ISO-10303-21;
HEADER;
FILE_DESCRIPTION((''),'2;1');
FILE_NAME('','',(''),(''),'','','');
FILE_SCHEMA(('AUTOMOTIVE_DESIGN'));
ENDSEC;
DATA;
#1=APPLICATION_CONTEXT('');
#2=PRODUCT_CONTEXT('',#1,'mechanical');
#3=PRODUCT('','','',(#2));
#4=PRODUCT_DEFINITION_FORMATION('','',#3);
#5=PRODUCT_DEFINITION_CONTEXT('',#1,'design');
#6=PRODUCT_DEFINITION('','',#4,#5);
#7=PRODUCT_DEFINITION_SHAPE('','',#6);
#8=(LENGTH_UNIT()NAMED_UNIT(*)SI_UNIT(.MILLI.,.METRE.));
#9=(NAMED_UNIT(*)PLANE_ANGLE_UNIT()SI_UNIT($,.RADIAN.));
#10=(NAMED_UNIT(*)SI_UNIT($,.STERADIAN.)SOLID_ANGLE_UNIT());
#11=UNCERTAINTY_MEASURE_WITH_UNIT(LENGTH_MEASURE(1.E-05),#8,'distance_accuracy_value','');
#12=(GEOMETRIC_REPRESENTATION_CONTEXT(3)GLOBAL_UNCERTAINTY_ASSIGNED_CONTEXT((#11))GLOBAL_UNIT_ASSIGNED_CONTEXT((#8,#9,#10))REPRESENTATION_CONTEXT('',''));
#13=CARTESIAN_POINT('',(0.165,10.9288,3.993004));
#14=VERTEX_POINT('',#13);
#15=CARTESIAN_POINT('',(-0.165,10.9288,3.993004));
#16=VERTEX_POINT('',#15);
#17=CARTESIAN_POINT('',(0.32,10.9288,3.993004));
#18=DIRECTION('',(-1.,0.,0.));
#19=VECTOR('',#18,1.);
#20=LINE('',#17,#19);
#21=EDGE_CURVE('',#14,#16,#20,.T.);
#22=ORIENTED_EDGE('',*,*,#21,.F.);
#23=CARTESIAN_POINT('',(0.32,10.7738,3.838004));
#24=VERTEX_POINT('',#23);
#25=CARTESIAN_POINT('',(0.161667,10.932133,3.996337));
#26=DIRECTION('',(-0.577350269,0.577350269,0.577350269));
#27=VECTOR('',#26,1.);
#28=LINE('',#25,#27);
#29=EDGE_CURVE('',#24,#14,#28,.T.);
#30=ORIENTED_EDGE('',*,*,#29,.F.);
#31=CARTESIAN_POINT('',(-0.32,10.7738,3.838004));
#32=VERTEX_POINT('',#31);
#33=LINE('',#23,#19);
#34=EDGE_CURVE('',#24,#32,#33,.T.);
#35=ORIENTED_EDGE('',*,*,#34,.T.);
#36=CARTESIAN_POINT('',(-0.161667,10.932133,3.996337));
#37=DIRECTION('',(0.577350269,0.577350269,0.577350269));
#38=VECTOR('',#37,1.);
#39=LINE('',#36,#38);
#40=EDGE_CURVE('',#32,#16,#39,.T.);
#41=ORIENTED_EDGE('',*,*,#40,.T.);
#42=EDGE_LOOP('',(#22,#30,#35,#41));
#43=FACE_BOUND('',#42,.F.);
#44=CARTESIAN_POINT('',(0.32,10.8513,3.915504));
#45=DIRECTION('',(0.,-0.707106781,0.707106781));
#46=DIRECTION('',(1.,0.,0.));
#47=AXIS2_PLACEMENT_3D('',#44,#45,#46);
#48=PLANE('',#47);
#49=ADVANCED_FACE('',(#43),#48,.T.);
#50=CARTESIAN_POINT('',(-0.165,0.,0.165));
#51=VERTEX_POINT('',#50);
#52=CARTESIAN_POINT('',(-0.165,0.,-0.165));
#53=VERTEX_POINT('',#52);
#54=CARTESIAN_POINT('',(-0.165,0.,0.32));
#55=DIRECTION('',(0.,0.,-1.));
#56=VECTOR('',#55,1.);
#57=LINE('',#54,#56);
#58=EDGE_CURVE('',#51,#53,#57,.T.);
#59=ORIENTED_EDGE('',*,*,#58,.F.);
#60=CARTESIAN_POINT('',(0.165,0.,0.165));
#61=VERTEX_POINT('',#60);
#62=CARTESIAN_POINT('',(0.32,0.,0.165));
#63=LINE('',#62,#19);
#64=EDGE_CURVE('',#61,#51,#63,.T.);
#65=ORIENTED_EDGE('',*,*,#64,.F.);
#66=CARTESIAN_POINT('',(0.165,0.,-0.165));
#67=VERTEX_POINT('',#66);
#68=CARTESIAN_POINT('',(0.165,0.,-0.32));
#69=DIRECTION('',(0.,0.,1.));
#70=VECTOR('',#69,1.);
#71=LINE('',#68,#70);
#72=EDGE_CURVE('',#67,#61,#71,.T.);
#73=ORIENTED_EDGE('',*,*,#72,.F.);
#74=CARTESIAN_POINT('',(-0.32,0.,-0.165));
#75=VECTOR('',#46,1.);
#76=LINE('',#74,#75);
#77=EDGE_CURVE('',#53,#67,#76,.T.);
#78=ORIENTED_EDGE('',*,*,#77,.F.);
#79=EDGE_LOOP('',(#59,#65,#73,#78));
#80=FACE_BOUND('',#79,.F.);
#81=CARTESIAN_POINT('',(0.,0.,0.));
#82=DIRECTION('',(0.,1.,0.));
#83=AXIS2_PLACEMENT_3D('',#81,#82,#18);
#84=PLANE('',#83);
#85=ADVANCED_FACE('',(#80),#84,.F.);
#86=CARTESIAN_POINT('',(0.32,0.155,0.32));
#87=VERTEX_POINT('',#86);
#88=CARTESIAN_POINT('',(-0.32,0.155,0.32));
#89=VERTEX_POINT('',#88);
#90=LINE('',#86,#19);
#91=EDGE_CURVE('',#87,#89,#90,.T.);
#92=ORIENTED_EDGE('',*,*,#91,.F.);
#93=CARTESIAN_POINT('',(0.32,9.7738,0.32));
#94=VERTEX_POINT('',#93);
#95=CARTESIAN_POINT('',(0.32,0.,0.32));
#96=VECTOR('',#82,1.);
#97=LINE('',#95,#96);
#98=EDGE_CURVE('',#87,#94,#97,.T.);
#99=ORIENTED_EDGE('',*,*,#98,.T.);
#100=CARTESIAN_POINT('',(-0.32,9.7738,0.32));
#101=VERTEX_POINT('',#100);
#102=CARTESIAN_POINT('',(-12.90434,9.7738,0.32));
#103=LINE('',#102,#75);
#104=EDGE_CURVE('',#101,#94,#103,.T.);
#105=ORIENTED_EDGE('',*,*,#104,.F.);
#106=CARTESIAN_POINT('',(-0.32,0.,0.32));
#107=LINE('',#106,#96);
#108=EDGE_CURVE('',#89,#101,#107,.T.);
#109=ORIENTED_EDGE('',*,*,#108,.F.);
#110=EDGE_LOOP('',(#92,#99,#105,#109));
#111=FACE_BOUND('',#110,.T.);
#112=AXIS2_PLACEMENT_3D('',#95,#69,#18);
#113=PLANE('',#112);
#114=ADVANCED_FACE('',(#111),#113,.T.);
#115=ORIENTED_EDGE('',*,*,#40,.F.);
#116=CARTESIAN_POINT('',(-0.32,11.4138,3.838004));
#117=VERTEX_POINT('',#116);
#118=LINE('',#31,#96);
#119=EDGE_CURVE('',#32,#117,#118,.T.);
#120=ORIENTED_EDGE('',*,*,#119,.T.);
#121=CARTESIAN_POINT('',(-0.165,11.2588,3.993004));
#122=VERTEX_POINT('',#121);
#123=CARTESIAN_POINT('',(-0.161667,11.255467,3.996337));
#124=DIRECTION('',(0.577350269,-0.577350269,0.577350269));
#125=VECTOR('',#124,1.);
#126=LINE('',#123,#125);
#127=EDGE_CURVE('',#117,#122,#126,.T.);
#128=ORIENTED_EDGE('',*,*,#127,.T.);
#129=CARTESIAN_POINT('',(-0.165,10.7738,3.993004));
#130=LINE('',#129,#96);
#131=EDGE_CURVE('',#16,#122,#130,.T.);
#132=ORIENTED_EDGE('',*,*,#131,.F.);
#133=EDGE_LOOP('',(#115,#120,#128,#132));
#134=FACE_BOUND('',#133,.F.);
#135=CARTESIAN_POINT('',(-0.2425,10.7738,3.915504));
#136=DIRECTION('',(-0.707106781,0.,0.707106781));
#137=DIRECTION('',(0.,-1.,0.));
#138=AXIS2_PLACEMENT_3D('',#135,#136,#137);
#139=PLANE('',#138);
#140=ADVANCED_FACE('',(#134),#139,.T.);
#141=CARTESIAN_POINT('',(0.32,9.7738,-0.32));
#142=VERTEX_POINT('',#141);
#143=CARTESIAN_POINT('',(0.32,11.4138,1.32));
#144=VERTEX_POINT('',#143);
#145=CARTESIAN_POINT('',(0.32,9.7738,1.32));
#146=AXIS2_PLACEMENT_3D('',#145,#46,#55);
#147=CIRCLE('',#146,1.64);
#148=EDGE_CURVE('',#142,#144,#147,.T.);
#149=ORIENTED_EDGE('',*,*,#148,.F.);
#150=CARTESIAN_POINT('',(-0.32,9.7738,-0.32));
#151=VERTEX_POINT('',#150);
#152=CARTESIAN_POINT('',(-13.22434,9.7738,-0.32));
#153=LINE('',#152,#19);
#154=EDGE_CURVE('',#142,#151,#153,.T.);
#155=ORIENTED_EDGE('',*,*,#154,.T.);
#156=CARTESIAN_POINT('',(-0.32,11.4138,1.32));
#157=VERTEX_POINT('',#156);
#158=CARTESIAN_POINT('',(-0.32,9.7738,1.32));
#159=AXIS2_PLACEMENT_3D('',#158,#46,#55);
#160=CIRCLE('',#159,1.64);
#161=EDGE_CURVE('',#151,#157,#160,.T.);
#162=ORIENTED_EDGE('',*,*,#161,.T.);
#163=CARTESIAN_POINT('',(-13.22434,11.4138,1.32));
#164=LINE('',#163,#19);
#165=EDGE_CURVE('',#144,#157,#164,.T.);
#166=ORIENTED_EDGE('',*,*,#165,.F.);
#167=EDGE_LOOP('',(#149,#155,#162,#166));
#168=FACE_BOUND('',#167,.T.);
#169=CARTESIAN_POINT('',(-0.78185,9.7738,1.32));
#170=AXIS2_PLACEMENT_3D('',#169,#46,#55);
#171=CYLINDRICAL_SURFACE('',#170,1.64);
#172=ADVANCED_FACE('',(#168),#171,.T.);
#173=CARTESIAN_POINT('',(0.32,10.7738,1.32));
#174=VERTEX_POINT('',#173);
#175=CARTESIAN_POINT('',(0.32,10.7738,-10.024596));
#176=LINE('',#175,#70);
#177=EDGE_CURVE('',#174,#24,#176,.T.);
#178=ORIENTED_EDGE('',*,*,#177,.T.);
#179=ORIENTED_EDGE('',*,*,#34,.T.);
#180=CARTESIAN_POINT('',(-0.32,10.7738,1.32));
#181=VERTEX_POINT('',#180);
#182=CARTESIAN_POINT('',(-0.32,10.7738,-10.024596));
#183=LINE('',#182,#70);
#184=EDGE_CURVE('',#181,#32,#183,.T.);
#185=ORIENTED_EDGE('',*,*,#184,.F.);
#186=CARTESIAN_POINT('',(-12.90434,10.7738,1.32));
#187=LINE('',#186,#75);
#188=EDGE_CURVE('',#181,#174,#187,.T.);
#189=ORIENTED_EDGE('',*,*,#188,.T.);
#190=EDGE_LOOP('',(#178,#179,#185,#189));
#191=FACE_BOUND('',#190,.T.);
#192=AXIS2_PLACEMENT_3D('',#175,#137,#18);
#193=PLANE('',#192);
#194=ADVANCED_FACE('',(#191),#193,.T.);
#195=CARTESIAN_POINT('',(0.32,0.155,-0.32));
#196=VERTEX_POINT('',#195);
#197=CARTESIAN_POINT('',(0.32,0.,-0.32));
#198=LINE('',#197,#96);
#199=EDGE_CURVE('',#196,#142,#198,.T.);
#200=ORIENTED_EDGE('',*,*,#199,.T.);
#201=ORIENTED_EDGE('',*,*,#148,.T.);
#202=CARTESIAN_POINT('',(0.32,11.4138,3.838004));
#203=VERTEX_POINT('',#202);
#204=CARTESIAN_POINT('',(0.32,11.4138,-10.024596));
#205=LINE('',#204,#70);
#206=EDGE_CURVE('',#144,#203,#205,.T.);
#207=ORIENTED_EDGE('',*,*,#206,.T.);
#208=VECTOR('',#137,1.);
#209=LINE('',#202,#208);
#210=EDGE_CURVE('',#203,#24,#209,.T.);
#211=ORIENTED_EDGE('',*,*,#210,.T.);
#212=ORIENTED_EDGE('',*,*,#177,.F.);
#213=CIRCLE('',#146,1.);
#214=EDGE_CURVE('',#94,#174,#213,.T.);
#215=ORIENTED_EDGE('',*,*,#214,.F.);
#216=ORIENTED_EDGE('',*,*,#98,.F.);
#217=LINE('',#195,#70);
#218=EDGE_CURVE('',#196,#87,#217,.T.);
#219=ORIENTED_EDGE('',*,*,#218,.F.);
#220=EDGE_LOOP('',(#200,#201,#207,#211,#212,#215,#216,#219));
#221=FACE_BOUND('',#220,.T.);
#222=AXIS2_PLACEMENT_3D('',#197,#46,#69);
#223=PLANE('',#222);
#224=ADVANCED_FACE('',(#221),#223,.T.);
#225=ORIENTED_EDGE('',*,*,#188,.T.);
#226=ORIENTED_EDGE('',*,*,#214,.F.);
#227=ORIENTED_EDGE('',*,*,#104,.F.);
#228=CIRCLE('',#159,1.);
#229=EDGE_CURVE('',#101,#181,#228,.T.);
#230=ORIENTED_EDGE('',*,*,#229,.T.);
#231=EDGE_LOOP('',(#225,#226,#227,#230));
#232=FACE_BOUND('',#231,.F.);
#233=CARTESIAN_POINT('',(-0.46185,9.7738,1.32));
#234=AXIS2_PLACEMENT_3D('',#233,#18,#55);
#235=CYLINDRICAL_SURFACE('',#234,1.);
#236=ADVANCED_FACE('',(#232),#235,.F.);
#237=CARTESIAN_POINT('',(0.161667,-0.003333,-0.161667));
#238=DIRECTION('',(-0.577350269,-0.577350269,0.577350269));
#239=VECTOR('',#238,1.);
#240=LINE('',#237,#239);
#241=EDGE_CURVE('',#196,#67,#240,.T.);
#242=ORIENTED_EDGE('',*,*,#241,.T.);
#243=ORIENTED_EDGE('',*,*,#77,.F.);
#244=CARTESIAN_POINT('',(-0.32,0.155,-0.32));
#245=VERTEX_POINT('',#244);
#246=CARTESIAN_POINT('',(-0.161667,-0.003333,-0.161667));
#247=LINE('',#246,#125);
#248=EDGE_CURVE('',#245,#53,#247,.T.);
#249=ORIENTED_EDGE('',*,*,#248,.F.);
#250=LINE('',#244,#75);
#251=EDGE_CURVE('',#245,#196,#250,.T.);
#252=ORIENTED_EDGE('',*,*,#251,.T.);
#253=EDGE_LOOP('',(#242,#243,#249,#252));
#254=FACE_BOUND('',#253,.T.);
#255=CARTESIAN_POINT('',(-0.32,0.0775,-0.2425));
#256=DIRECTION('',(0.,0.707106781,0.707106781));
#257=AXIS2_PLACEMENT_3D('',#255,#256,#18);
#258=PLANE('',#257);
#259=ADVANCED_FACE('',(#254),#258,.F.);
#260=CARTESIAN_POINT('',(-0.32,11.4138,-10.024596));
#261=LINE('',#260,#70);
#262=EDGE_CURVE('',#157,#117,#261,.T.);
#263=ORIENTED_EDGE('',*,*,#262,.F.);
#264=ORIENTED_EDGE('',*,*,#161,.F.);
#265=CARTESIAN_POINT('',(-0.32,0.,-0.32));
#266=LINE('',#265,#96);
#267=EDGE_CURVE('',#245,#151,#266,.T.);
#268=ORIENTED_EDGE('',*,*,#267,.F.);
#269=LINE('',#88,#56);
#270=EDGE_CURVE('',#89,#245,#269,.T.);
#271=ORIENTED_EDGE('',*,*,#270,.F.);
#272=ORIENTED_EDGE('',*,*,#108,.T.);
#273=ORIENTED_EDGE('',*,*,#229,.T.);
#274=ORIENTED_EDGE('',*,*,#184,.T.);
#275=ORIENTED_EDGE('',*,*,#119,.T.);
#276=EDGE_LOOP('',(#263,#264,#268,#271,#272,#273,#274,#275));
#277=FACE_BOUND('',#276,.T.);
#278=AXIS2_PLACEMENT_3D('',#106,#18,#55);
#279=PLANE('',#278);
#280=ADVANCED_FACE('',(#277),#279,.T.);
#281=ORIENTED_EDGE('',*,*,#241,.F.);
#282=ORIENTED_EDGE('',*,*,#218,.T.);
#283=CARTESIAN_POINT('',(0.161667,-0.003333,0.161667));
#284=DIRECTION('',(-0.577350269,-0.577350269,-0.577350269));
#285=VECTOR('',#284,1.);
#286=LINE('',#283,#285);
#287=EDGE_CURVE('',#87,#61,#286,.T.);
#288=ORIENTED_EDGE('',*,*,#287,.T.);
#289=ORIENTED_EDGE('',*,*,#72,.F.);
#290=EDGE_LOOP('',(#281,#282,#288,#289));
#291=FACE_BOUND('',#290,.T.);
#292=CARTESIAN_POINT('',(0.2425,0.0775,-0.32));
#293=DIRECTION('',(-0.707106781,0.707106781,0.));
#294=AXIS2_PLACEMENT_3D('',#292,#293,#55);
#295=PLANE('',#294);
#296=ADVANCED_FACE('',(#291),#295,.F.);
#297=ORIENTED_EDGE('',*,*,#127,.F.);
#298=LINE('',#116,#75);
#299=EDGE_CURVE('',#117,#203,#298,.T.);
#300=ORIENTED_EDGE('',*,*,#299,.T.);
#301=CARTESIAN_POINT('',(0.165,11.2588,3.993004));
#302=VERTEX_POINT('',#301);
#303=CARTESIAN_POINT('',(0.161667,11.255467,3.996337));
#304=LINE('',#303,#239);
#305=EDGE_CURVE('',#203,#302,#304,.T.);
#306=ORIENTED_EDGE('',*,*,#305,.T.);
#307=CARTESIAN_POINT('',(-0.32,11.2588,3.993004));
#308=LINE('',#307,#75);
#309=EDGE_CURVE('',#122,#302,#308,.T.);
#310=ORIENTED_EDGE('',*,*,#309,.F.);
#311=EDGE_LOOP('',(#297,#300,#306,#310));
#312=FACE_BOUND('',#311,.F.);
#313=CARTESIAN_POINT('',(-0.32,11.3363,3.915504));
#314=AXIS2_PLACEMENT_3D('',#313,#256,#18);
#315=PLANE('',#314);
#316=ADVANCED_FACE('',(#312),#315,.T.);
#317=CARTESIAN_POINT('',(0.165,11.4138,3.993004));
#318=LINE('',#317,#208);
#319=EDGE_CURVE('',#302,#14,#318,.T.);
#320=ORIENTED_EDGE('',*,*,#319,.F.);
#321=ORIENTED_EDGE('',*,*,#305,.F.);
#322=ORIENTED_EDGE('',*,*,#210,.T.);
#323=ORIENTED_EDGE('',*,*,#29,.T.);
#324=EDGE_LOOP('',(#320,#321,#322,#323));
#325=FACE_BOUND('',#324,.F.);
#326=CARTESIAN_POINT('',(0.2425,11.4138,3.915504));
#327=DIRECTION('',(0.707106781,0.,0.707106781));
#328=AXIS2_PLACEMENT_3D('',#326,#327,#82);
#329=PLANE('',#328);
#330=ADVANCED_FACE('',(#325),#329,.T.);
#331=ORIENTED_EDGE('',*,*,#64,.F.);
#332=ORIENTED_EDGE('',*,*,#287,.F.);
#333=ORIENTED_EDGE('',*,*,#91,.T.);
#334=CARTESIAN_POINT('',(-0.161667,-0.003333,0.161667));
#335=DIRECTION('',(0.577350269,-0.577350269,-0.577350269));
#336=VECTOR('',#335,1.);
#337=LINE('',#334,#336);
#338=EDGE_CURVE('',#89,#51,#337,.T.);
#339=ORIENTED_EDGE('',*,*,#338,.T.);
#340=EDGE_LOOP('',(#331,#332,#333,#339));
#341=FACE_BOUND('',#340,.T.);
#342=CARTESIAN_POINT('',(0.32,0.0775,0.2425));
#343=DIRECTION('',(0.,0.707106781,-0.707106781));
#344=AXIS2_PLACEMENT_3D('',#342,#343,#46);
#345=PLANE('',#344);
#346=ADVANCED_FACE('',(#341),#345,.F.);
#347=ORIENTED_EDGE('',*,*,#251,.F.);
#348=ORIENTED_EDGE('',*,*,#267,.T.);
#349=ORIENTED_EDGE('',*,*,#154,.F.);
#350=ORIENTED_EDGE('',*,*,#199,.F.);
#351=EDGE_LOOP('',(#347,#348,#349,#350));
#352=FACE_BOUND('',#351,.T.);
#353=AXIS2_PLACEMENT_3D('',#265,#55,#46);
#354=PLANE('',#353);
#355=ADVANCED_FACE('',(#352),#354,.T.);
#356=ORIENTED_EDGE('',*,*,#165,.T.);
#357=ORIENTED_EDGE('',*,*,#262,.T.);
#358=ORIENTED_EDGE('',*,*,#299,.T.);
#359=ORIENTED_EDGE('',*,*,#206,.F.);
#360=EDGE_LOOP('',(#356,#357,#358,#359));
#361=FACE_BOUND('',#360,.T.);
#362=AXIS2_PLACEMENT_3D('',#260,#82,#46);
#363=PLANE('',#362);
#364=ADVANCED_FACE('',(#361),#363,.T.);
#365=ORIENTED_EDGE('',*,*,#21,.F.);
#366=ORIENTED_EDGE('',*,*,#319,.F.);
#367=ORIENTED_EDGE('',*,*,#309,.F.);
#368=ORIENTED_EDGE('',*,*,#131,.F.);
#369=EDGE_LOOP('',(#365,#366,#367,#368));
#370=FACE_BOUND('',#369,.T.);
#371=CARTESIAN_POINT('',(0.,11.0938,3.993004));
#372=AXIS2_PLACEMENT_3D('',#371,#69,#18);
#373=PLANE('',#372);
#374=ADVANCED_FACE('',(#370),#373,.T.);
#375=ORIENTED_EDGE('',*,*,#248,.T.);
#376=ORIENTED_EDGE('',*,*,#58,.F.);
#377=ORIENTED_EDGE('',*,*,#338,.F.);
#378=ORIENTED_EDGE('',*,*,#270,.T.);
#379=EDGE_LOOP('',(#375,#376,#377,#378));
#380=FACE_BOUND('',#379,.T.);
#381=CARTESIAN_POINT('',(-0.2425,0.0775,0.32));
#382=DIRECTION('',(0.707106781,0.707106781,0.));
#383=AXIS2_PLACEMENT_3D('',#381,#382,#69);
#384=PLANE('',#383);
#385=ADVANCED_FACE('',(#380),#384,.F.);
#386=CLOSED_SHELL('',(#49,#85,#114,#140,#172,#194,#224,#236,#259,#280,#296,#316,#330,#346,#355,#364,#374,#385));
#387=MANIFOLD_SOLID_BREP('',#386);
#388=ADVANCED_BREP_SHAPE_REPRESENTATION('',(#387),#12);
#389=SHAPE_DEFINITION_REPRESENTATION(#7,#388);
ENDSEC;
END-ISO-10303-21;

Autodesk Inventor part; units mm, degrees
ref_plane "YZ Plane" through (0, 0, 0) normal (1, 0, 0) x (0, 1, 0)
ref_plane "XZ Plane" through (0, 0, 0) normal (0, 1, 0) x (-1, 0, 0)
ref_plane "XY Plane" through (0, 0, 0) normal (0, 0, 1) x (1, 0, 0)
sketch "Sketch1" plane through (0, 0, 0) normal (0, 1, 0) x (-1, 0, 0)
  line L0 (0.32, -0.32) -> (-0.32, -0.32)
  line L1 (-0.32, -0.32) -> (-0.32, 0.32)
  line L2 (-0.32, 0.32) -> (0.32, 0.32)
  line L3 (0.32, 0.32) -> (0.32, -0.32)
  line L4 (0.32, -0.32) -> (-0.32, 0.32) construction
  line L5 (-0.32, -0.32) -> (0.32, 0.32) construction
  point P0 (0, 0)
  dimension "d0" = 0.64
  dimension "d1" = 0.64
extrude "Extrusion1" add sketch "Sketch1" along normal blind 14.0176
chamfer "Chamfer1" distance 0.155 angle 45 8 edges at (0.32, 14.0176, 0) (0, 14.0176, -0.32) (0, 14.0176, 0.32) (-0.32, 14.0176, 0) (0.32, 0, 0) (0, 0, -0.32) (0, 0, 0.32) (-0.32, 0, 0)
sketch "Sketch2" plane through (-0.32, 0.155, 0.32) normal (0, 0, 1) x (1, 0, 0)
  line L0 (-0.9237, 9.6188) -> (1.8536, 9.6188)
  point P0 (0.32, -0.155)
  dimension "d7" = 9.7738
bend part "Bend Part1" radius 1 angle 90 line through (-1.2437, 9.7738, 0.32) along (1, 0, 0) centre toward (0, 0, 1) moving side (0, 1, 0) both sides no
properties part number "PinRight2" material "Gold"
